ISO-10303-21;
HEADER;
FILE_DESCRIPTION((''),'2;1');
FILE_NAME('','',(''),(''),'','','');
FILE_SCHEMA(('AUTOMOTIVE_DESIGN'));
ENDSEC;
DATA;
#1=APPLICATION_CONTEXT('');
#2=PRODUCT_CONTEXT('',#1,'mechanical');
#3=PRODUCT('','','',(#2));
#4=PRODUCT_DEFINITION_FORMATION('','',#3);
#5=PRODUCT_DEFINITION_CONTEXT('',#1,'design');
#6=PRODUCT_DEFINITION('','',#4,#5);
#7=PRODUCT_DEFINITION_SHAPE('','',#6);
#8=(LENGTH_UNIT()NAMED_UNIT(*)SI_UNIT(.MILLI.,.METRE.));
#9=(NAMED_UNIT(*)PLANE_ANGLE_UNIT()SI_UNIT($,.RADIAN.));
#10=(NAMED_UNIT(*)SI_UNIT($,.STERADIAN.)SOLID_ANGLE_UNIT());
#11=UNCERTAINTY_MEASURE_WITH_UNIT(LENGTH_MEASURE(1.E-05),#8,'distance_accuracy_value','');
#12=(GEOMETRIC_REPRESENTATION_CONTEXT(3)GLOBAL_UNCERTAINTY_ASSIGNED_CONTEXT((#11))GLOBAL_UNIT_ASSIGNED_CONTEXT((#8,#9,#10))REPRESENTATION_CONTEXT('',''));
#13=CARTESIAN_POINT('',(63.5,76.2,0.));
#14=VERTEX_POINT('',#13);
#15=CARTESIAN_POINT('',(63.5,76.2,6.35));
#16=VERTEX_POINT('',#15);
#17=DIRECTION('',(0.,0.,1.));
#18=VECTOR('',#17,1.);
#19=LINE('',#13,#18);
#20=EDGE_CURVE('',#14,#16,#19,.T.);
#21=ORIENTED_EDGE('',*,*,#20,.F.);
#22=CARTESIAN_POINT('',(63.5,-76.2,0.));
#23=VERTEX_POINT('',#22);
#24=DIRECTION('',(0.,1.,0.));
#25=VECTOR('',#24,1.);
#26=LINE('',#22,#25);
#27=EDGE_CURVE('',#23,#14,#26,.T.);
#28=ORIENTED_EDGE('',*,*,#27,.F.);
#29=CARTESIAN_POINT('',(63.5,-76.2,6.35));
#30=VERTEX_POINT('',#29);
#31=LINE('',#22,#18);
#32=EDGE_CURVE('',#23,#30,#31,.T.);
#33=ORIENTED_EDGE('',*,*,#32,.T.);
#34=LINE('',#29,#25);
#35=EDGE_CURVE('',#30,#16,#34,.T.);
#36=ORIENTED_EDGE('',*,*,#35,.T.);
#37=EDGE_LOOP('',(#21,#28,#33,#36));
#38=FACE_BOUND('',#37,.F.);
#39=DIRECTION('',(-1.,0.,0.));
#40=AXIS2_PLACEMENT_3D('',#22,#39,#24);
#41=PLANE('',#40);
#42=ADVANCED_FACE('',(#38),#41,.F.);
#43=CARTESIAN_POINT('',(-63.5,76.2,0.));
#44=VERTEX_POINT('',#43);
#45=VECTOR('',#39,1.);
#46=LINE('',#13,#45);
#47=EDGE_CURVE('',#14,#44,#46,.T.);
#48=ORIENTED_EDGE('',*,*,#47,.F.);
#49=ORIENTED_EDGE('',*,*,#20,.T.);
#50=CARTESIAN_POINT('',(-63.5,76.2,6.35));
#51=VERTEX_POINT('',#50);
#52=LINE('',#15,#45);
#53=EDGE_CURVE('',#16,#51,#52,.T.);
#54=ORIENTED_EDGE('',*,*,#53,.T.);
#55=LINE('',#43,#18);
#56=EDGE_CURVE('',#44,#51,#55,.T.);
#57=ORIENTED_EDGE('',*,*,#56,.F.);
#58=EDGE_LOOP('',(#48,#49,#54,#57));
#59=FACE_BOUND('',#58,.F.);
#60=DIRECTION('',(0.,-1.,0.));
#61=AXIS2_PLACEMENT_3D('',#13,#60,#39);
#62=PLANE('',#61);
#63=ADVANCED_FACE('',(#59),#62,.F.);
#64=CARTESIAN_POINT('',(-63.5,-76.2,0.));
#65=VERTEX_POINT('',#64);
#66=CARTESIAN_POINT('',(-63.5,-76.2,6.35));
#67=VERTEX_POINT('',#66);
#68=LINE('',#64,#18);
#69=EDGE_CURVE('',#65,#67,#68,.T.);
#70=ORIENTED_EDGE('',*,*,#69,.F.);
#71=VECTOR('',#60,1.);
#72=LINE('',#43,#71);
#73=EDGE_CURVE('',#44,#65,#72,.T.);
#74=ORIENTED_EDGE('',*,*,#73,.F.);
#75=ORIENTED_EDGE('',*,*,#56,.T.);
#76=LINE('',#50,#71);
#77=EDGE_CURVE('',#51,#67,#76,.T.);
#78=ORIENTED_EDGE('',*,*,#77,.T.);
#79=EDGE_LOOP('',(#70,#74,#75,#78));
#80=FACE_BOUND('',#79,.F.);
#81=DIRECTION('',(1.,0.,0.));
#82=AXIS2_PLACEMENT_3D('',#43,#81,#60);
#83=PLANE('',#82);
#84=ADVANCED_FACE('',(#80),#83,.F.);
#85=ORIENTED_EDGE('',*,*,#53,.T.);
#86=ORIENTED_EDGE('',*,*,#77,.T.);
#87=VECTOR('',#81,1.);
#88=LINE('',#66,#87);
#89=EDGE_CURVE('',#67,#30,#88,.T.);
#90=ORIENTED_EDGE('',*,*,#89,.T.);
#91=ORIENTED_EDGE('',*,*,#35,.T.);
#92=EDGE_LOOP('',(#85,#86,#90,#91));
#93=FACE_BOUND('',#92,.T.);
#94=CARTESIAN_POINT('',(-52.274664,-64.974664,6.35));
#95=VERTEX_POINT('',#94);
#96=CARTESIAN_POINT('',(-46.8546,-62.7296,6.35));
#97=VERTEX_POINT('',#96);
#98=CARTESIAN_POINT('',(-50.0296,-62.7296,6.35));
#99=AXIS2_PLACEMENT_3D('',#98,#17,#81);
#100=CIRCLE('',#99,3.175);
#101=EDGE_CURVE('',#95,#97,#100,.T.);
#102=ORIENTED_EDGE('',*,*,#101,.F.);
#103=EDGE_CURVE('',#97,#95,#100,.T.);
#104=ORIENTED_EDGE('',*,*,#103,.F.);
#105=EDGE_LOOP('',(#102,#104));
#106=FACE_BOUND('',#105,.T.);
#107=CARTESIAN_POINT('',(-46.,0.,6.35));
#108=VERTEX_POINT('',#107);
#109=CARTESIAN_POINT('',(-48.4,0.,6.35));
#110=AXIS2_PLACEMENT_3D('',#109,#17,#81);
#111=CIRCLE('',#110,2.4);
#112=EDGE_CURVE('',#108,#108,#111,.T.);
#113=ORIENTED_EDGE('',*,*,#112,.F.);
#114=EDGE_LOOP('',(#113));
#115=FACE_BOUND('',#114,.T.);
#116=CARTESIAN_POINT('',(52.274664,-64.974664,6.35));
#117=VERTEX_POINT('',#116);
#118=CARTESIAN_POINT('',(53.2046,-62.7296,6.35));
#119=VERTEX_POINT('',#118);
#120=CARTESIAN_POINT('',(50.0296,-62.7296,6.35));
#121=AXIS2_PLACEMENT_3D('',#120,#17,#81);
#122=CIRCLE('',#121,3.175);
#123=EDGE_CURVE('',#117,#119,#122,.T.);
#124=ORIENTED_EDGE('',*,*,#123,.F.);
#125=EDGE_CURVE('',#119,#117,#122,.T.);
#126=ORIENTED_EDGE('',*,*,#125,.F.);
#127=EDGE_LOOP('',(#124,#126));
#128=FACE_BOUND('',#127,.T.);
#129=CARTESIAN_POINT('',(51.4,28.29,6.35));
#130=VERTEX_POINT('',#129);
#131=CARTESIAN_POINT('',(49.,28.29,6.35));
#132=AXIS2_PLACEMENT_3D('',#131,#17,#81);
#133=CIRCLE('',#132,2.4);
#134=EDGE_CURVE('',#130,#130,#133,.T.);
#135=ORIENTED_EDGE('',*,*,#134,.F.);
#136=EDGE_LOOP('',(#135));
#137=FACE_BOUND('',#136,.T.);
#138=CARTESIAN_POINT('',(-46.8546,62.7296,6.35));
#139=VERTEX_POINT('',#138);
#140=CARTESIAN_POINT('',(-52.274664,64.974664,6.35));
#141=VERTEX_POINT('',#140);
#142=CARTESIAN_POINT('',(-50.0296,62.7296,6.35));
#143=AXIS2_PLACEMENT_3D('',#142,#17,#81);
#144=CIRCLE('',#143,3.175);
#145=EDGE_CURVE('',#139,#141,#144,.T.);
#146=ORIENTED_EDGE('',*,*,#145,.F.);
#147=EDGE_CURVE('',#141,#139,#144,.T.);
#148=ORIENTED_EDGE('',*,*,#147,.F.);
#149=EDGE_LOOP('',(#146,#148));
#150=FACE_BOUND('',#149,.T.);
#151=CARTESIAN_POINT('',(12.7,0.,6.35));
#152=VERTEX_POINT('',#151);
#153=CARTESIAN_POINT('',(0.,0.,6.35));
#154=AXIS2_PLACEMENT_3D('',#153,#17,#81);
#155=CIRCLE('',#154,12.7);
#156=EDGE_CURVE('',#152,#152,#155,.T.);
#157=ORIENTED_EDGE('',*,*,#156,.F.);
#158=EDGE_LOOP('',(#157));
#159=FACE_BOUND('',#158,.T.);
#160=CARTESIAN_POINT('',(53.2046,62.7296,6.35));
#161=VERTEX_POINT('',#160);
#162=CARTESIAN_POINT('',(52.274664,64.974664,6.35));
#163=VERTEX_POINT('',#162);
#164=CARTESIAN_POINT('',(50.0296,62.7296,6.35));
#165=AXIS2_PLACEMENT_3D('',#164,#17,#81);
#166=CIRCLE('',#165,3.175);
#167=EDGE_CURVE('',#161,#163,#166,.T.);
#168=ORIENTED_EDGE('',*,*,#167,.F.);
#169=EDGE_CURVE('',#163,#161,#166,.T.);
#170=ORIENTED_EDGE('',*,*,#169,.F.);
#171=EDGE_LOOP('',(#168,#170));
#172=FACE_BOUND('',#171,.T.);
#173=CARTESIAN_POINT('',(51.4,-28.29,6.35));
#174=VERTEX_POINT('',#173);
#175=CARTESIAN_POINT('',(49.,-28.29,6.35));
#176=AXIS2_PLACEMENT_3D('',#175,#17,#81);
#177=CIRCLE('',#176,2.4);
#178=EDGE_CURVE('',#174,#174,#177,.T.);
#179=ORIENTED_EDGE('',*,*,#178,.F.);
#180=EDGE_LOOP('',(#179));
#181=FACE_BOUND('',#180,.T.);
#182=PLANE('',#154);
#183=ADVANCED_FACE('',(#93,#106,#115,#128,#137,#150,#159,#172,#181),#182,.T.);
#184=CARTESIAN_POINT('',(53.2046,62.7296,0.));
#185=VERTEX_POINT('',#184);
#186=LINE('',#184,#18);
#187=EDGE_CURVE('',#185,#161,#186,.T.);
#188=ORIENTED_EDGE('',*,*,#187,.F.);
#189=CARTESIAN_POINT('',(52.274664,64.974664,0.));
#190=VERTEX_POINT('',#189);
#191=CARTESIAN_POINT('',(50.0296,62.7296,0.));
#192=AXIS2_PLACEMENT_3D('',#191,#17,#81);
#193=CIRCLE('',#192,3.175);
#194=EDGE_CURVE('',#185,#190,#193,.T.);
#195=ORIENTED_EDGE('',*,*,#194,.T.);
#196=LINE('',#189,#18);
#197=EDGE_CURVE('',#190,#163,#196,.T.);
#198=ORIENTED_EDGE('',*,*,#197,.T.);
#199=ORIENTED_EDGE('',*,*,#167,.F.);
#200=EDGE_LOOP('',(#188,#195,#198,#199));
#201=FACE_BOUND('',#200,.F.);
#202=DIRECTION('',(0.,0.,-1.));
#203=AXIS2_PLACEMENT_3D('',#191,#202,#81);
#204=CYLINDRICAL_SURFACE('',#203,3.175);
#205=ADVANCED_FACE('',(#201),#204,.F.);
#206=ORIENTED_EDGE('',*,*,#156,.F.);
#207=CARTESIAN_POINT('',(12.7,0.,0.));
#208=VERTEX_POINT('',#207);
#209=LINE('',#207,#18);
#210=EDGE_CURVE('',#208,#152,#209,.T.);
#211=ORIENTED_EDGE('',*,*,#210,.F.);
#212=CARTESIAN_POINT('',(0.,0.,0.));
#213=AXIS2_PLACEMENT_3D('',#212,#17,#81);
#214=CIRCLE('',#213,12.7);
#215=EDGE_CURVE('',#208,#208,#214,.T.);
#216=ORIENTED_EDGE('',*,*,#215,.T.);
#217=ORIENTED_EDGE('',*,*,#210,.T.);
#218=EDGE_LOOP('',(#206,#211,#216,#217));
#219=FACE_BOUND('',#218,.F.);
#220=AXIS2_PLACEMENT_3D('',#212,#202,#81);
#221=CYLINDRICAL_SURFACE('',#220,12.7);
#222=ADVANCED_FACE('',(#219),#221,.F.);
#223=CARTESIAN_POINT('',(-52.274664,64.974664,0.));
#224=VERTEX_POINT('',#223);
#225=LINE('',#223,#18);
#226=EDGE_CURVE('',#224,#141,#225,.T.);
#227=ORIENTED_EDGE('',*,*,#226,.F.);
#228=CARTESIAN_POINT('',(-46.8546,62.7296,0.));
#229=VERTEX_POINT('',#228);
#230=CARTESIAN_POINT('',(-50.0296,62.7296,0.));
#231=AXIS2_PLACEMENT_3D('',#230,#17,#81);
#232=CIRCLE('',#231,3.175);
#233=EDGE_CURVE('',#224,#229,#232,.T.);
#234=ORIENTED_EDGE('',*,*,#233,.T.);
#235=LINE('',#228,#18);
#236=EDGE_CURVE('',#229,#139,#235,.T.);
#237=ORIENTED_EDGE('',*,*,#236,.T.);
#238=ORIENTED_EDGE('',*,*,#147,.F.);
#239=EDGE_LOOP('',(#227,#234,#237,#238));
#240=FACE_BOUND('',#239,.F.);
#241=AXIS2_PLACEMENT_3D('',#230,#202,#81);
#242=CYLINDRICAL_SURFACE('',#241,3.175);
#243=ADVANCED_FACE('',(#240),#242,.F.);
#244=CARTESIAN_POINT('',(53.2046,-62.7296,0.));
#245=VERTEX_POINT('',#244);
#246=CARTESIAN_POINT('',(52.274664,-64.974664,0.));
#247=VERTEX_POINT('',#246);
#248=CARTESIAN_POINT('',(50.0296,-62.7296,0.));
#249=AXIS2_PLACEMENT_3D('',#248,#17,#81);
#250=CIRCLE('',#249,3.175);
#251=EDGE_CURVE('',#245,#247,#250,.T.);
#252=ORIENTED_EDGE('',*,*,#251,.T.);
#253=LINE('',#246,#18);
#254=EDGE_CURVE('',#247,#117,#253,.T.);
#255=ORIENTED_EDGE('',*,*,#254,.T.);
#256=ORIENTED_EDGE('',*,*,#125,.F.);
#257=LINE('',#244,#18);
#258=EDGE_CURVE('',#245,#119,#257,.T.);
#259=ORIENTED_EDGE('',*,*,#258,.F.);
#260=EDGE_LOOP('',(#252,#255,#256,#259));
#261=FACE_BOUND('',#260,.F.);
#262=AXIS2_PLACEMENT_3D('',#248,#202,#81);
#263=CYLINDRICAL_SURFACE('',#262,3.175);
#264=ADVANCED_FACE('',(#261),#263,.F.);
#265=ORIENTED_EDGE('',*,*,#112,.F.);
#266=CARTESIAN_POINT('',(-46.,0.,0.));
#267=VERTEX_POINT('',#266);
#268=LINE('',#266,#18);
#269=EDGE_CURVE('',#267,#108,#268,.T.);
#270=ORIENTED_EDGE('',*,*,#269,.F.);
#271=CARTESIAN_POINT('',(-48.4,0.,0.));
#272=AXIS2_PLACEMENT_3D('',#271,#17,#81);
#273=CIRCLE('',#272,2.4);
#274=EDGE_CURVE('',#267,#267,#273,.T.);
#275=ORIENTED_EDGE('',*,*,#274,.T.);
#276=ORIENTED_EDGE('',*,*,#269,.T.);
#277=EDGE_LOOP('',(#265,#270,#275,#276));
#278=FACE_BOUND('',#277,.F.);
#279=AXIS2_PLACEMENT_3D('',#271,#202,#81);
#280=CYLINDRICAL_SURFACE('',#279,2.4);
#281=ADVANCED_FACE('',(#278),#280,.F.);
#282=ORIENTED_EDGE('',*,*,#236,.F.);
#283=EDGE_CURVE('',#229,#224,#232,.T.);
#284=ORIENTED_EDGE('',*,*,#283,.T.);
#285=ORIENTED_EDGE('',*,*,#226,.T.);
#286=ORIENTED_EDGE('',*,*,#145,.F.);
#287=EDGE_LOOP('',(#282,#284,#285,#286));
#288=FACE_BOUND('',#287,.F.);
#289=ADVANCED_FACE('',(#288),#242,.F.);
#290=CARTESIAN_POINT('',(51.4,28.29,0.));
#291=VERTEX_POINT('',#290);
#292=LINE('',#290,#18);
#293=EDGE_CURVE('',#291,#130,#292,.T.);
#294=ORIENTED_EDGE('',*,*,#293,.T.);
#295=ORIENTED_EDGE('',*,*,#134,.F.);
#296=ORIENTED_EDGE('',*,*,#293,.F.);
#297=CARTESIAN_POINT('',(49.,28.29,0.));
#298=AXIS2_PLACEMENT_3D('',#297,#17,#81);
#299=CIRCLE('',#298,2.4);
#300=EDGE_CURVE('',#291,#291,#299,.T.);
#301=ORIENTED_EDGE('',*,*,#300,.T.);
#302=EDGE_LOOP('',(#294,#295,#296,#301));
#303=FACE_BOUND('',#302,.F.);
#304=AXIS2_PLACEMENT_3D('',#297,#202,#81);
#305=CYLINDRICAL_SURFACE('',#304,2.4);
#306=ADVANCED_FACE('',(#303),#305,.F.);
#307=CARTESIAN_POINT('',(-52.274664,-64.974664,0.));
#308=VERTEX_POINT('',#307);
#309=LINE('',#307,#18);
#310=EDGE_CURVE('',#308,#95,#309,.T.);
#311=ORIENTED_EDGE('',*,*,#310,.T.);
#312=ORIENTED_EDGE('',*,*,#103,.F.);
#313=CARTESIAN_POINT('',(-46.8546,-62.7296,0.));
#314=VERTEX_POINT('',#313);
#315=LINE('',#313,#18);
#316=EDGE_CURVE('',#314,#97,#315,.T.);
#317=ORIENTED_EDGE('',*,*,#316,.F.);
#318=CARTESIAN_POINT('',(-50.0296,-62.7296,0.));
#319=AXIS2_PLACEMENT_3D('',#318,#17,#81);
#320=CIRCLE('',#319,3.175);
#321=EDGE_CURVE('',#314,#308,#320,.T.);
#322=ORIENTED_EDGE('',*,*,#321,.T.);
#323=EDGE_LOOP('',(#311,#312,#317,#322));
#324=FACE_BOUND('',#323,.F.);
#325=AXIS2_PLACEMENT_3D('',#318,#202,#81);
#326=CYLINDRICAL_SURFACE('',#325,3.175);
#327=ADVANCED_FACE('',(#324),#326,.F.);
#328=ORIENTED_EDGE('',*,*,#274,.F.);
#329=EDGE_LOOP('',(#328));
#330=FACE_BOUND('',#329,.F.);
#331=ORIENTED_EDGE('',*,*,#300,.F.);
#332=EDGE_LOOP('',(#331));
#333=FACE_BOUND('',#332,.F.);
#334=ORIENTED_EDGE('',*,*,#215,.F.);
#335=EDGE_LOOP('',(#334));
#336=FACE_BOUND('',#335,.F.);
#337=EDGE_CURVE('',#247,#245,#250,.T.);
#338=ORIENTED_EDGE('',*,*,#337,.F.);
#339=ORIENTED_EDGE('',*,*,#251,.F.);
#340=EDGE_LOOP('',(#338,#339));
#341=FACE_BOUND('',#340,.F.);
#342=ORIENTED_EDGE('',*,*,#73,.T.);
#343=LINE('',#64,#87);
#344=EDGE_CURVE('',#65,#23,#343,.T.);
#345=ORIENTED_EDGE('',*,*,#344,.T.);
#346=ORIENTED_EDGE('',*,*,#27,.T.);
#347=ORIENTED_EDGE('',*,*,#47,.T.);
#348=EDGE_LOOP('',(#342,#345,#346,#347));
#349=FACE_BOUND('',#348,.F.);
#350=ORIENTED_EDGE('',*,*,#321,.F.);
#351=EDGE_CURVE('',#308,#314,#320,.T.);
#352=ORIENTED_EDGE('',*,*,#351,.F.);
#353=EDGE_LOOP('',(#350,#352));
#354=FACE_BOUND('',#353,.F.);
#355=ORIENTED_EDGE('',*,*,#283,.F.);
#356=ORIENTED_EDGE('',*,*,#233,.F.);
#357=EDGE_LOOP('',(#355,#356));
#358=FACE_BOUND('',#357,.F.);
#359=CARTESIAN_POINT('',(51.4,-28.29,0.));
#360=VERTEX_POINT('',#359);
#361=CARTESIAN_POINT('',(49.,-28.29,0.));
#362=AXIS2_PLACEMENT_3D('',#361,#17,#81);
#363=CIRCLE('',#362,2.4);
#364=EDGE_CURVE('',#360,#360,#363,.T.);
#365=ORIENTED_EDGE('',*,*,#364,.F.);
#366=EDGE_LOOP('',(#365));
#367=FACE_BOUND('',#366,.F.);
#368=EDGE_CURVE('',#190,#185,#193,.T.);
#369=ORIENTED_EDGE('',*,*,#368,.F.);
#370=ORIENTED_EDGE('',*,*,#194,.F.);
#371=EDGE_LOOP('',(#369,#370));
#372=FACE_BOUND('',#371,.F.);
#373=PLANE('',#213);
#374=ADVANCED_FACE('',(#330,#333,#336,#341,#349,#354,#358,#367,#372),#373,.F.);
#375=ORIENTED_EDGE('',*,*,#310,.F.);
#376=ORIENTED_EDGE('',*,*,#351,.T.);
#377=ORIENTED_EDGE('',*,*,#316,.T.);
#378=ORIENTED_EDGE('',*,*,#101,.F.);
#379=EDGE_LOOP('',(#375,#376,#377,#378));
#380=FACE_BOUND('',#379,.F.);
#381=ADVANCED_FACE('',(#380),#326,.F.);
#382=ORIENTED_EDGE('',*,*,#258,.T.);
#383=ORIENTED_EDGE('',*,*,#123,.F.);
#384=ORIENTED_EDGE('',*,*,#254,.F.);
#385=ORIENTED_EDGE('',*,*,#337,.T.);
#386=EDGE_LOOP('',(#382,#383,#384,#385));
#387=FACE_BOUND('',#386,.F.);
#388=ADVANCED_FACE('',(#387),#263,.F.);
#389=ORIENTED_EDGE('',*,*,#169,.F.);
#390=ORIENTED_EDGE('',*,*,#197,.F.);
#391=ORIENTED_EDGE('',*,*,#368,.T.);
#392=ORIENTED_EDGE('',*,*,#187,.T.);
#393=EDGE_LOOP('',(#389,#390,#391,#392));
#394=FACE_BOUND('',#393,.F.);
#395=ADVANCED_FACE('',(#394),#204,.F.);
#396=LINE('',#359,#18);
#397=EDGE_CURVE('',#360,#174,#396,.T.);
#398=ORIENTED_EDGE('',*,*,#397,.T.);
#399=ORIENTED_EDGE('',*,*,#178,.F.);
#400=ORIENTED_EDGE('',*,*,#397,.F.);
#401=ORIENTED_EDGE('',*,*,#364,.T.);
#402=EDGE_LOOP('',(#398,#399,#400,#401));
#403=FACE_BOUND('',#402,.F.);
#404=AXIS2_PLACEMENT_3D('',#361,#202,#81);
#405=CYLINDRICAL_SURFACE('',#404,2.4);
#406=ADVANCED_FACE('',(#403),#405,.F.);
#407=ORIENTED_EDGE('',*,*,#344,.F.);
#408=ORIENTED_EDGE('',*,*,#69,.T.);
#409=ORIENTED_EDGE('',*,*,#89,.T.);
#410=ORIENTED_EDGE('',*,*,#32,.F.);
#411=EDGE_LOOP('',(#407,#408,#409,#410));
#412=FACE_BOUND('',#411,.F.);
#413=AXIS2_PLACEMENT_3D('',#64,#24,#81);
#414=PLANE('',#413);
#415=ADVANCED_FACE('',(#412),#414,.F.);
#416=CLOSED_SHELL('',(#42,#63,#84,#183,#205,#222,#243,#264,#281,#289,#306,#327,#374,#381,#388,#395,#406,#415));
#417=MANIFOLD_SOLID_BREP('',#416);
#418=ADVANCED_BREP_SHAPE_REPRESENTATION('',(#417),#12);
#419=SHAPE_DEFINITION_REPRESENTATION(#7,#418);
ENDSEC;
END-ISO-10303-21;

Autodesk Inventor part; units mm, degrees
ref_plane "YZ Plane" through (0, 0, 0) normal (1, 0, 0) x (0, 1, 0)
ref_plane "XZ Plane" through (0, 0, 0) normal (0, 1, 0) x (-1, 0, 0)
ref_plane "XY Plane" through (0, 0, 0) normal (0, 0, 1) x (1, 0, 0)
sketch "Sketch1" plane through (0, 0, 0) normal (0, 0, 1) x (1, 0, 0)
  line L0 (-63.5, -76.2) -> (63.5, -76.2)
  line L1 (63.5, -76.2) -> (63.5, 76.2)
  line L2 (63.5, 76.2) -> (-63.5, 76.2)
  line L3 (-63.5, 76.2) -> (-63.5, -76.2)
  line L4 (-63.5, -76.2) -> (63.5, 76.2) construction
  line L5 (63.5, -76.2) -> (-63.5, 76.2) construction
  line L6 (-63.5, 76.2) -> (-50.0296, 62.7296)
  line L7 (-63.5, 76.2) -> (-44.45, 76.2) construction
  line L8 (63.5, 76.2) -> (69.85, 76.2) construction
  line L9 (63.5, 76.2) -> (50.0296, 62.7296)
  line L10 (63.5, -76.2) -> (50.0296, -62.7296)
  line L11 (-63.5, -76.2) -> (-50.0296, -62.7296)
  circle A0 centre (-50.0296, 62.7296) radius 3.175
  circle A1 centre (50.0296, 62.7296) radius 3.175
  circle A2 centre (50.0296, -62.7296) radius 3.175
  circle A3 centre (-50.0296, -62.7296) radius 3.175
  circle A4 centre (0, 0) radius 12.7
  line L12 (0, 0) -> (-48.4, 0) construction
  line L13 (0, 0) -> (12.7, 0)
  line L14 (0, 0) -> (49, 0) construction
  line L15 (49, 0) -> (49, 28.29) construction
  line L16 (49, 0) -> (49, -28.29) construction
  circle A5 centre (49, -28.29) radius 2.4
  circle A6 centre (49, 28.29) radius 2.4
  circle A7 centre (-48.4, 0) radius 2.4
  dimension "d10" = 25.4
  dimension "d0" = 127
  dimension "d1" = 152.4
  dimension "d2" = 19.05
  dimension "d3" = 45
  dimension "d6" = 6.35
  dimension "d7" = 6.35
  dimension "d8" = 6.35
  dimension "d9" = 6.35
  dimension "d11" = 48.4
  dimension "d12" = 49
  dimension "d13" = 28.29
  dimension "d14" = 28.29
  dimension "d15" = 4.8
  dimension "d16" = 4.8
  dimension "d17" = 4.8
extrude "Extrusion1" add sketch "Sketch1" along normal blind 6.35
properties part number "small plate"
